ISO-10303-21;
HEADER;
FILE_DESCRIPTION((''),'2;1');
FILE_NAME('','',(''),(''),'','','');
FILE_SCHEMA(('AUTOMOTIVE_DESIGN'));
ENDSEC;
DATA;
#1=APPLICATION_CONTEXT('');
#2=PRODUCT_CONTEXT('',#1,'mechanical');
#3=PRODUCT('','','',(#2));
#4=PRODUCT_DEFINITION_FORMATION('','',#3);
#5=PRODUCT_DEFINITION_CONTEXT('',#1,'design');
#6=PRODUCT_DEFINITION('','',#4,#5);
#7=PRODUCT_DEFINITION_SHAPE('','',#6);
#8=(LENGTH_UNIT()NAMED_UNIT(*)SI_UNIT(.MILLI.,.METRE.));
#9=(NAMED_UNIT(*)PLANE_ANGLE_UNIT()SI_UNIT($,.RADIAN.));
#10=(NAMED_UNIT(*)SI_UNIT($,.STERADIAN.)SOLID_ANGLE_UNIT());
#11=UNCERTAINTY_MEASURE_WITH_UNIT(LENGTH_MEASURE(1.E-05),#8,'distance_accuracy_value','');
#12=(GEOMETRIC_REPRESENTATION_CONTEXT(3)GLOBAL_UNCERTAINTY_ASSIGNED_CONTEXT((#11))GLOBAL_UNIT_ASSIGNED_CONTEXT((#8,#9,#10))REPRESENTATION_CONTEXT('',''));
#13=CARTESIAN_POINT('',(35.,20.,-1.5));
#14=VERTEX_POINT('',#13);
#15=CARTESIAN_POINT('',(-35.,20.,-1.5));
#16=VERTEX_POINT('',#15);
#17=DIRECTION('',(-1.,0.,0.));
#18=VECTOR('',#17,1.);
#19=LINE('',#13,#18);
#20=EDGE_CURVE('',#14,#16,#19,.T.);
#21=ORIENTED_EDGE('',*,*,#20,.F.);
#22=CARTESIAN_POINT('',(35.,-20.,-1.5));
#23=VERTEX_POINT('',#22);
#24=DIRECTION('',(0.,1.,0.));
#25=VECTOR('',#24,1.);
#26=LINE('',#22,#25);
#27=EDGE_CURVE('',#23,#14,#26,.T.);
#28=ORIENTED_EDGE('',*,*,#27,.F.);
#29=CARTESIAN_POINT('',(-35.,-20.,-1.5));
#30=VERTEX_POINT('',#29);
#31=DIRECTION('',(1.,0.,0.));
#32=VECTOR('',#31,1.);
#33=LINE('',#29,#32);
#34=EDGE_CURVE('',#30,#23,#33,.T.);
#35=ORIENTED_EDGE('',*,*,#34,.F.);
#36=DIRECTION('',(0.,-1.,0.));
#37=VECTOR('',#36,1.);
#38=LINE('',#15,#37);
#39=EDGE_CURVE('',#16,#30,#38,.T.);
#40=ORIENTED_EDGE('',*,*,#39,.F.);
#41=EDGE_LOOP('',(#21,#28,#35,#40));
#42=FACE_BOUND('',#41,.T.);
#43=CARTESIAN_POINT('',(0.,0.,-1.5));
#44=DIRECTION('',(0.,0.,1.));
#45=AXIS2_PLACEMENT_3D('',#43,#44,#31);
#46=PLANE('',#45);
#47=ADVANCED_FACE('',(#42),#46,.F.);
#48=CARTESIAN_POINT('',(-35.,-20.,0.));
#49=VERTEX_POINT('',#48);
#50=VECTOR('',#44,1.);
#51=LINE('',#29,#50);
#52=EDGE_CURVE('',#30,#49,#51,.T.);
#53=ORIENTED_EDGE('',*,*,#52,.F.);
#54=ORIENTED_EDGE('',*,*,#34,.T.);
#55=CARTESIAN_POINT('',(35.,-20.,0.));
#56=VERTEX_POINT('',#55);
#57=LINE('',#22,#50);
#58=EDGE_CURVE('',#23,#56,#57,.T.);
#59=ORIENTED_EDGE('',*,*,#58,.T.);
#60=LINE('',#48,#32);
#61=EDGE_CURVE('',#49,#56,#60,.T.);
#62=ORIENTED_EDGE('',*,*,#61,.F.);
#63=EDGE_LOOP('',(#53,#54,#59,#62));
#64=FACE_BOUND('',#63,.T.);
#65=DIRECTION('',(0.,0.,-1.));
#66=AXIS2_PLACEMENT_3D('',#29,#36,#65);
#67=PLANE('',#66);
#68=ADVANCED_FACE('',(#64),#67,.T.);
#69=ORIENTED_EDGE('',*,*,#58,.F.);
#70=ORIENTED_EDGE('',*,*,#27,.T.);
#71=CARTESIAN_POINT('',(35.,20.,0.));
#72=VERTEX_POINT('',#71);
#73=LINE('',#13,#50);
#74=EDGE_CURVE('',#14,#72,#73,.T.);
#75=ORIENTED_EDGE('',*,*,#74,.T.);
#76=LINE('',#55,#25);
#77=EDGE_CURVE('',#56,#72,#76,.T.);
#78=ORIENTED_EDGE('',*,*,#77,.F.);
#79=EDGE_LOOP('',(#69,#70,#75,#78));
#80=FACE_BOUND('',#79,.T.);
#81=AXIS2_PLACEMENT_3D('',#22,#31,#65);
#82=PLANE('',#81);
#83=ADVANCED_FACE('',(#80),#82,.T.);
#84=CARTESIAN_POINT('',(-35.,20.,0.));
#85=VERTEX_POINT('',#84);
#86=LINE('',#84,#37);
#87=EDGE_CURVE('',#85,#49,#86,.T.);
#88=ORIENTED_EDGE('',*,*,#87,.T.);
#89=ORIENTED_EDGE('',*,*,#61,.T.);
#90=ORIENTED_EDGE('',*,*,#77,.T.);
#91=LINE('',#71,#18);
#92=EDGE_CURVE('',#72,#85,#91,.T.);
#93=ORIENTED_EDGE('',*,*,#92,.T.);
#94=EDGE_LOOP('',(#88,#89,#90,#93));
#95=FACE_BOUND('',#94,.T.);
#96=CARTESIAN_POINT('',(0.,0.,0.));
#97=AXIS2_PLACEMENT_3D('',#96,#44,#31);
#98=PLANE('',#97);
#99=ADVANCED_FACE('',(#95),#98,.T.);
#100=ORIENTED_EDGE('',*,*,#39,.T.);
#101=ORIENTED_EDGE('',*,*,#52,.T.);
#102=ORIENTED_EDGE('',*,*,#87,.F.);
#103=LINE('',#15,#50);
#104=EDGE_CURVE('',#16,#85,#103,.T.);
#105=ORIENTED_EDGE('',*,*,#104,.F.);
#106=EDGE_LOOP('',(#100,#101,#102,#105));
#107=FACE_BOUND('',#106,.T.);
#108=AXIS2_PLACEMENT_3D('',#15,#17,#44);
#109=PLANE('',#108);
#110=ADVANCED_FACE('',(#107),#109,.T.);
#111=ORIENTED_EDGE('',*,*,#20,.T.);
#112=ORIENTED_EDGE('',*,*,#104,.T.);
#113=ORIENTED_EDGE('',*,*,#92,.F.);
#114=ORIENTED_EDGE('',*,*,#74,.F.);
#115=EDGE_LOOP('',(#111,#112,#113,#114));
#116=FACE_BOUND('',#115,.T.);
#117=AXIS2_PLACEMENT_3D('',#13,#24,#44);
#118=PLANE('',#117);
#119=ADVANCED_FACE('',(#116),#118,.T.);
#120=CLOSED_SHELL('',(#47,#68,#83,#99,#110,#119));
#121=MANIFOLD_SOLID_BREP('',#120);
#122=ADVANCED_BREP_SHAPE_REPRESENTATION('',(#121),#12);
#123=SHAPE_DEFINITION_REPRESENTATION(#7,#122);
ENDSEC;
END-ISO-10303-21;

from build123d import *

# Parameters (mm, degrees)
SKETCH_1_W             = 70
SKETCH_1_H             = 40
SM_BASE_FLANGE_1_DEPTH = 1.5


# Sheet-metal steps are written as plain solids
with BuildPart() as part:
    # Sketch 1 → 基体-法兰1 (new body)
    with BuildSketch(Plane.XY):
        Rectangle(SKETCH_1_W, SKETCH_1_H)
    extrude(amount=-SM_BASE_FLANGE_1_DEPTH)


solid = part.part
